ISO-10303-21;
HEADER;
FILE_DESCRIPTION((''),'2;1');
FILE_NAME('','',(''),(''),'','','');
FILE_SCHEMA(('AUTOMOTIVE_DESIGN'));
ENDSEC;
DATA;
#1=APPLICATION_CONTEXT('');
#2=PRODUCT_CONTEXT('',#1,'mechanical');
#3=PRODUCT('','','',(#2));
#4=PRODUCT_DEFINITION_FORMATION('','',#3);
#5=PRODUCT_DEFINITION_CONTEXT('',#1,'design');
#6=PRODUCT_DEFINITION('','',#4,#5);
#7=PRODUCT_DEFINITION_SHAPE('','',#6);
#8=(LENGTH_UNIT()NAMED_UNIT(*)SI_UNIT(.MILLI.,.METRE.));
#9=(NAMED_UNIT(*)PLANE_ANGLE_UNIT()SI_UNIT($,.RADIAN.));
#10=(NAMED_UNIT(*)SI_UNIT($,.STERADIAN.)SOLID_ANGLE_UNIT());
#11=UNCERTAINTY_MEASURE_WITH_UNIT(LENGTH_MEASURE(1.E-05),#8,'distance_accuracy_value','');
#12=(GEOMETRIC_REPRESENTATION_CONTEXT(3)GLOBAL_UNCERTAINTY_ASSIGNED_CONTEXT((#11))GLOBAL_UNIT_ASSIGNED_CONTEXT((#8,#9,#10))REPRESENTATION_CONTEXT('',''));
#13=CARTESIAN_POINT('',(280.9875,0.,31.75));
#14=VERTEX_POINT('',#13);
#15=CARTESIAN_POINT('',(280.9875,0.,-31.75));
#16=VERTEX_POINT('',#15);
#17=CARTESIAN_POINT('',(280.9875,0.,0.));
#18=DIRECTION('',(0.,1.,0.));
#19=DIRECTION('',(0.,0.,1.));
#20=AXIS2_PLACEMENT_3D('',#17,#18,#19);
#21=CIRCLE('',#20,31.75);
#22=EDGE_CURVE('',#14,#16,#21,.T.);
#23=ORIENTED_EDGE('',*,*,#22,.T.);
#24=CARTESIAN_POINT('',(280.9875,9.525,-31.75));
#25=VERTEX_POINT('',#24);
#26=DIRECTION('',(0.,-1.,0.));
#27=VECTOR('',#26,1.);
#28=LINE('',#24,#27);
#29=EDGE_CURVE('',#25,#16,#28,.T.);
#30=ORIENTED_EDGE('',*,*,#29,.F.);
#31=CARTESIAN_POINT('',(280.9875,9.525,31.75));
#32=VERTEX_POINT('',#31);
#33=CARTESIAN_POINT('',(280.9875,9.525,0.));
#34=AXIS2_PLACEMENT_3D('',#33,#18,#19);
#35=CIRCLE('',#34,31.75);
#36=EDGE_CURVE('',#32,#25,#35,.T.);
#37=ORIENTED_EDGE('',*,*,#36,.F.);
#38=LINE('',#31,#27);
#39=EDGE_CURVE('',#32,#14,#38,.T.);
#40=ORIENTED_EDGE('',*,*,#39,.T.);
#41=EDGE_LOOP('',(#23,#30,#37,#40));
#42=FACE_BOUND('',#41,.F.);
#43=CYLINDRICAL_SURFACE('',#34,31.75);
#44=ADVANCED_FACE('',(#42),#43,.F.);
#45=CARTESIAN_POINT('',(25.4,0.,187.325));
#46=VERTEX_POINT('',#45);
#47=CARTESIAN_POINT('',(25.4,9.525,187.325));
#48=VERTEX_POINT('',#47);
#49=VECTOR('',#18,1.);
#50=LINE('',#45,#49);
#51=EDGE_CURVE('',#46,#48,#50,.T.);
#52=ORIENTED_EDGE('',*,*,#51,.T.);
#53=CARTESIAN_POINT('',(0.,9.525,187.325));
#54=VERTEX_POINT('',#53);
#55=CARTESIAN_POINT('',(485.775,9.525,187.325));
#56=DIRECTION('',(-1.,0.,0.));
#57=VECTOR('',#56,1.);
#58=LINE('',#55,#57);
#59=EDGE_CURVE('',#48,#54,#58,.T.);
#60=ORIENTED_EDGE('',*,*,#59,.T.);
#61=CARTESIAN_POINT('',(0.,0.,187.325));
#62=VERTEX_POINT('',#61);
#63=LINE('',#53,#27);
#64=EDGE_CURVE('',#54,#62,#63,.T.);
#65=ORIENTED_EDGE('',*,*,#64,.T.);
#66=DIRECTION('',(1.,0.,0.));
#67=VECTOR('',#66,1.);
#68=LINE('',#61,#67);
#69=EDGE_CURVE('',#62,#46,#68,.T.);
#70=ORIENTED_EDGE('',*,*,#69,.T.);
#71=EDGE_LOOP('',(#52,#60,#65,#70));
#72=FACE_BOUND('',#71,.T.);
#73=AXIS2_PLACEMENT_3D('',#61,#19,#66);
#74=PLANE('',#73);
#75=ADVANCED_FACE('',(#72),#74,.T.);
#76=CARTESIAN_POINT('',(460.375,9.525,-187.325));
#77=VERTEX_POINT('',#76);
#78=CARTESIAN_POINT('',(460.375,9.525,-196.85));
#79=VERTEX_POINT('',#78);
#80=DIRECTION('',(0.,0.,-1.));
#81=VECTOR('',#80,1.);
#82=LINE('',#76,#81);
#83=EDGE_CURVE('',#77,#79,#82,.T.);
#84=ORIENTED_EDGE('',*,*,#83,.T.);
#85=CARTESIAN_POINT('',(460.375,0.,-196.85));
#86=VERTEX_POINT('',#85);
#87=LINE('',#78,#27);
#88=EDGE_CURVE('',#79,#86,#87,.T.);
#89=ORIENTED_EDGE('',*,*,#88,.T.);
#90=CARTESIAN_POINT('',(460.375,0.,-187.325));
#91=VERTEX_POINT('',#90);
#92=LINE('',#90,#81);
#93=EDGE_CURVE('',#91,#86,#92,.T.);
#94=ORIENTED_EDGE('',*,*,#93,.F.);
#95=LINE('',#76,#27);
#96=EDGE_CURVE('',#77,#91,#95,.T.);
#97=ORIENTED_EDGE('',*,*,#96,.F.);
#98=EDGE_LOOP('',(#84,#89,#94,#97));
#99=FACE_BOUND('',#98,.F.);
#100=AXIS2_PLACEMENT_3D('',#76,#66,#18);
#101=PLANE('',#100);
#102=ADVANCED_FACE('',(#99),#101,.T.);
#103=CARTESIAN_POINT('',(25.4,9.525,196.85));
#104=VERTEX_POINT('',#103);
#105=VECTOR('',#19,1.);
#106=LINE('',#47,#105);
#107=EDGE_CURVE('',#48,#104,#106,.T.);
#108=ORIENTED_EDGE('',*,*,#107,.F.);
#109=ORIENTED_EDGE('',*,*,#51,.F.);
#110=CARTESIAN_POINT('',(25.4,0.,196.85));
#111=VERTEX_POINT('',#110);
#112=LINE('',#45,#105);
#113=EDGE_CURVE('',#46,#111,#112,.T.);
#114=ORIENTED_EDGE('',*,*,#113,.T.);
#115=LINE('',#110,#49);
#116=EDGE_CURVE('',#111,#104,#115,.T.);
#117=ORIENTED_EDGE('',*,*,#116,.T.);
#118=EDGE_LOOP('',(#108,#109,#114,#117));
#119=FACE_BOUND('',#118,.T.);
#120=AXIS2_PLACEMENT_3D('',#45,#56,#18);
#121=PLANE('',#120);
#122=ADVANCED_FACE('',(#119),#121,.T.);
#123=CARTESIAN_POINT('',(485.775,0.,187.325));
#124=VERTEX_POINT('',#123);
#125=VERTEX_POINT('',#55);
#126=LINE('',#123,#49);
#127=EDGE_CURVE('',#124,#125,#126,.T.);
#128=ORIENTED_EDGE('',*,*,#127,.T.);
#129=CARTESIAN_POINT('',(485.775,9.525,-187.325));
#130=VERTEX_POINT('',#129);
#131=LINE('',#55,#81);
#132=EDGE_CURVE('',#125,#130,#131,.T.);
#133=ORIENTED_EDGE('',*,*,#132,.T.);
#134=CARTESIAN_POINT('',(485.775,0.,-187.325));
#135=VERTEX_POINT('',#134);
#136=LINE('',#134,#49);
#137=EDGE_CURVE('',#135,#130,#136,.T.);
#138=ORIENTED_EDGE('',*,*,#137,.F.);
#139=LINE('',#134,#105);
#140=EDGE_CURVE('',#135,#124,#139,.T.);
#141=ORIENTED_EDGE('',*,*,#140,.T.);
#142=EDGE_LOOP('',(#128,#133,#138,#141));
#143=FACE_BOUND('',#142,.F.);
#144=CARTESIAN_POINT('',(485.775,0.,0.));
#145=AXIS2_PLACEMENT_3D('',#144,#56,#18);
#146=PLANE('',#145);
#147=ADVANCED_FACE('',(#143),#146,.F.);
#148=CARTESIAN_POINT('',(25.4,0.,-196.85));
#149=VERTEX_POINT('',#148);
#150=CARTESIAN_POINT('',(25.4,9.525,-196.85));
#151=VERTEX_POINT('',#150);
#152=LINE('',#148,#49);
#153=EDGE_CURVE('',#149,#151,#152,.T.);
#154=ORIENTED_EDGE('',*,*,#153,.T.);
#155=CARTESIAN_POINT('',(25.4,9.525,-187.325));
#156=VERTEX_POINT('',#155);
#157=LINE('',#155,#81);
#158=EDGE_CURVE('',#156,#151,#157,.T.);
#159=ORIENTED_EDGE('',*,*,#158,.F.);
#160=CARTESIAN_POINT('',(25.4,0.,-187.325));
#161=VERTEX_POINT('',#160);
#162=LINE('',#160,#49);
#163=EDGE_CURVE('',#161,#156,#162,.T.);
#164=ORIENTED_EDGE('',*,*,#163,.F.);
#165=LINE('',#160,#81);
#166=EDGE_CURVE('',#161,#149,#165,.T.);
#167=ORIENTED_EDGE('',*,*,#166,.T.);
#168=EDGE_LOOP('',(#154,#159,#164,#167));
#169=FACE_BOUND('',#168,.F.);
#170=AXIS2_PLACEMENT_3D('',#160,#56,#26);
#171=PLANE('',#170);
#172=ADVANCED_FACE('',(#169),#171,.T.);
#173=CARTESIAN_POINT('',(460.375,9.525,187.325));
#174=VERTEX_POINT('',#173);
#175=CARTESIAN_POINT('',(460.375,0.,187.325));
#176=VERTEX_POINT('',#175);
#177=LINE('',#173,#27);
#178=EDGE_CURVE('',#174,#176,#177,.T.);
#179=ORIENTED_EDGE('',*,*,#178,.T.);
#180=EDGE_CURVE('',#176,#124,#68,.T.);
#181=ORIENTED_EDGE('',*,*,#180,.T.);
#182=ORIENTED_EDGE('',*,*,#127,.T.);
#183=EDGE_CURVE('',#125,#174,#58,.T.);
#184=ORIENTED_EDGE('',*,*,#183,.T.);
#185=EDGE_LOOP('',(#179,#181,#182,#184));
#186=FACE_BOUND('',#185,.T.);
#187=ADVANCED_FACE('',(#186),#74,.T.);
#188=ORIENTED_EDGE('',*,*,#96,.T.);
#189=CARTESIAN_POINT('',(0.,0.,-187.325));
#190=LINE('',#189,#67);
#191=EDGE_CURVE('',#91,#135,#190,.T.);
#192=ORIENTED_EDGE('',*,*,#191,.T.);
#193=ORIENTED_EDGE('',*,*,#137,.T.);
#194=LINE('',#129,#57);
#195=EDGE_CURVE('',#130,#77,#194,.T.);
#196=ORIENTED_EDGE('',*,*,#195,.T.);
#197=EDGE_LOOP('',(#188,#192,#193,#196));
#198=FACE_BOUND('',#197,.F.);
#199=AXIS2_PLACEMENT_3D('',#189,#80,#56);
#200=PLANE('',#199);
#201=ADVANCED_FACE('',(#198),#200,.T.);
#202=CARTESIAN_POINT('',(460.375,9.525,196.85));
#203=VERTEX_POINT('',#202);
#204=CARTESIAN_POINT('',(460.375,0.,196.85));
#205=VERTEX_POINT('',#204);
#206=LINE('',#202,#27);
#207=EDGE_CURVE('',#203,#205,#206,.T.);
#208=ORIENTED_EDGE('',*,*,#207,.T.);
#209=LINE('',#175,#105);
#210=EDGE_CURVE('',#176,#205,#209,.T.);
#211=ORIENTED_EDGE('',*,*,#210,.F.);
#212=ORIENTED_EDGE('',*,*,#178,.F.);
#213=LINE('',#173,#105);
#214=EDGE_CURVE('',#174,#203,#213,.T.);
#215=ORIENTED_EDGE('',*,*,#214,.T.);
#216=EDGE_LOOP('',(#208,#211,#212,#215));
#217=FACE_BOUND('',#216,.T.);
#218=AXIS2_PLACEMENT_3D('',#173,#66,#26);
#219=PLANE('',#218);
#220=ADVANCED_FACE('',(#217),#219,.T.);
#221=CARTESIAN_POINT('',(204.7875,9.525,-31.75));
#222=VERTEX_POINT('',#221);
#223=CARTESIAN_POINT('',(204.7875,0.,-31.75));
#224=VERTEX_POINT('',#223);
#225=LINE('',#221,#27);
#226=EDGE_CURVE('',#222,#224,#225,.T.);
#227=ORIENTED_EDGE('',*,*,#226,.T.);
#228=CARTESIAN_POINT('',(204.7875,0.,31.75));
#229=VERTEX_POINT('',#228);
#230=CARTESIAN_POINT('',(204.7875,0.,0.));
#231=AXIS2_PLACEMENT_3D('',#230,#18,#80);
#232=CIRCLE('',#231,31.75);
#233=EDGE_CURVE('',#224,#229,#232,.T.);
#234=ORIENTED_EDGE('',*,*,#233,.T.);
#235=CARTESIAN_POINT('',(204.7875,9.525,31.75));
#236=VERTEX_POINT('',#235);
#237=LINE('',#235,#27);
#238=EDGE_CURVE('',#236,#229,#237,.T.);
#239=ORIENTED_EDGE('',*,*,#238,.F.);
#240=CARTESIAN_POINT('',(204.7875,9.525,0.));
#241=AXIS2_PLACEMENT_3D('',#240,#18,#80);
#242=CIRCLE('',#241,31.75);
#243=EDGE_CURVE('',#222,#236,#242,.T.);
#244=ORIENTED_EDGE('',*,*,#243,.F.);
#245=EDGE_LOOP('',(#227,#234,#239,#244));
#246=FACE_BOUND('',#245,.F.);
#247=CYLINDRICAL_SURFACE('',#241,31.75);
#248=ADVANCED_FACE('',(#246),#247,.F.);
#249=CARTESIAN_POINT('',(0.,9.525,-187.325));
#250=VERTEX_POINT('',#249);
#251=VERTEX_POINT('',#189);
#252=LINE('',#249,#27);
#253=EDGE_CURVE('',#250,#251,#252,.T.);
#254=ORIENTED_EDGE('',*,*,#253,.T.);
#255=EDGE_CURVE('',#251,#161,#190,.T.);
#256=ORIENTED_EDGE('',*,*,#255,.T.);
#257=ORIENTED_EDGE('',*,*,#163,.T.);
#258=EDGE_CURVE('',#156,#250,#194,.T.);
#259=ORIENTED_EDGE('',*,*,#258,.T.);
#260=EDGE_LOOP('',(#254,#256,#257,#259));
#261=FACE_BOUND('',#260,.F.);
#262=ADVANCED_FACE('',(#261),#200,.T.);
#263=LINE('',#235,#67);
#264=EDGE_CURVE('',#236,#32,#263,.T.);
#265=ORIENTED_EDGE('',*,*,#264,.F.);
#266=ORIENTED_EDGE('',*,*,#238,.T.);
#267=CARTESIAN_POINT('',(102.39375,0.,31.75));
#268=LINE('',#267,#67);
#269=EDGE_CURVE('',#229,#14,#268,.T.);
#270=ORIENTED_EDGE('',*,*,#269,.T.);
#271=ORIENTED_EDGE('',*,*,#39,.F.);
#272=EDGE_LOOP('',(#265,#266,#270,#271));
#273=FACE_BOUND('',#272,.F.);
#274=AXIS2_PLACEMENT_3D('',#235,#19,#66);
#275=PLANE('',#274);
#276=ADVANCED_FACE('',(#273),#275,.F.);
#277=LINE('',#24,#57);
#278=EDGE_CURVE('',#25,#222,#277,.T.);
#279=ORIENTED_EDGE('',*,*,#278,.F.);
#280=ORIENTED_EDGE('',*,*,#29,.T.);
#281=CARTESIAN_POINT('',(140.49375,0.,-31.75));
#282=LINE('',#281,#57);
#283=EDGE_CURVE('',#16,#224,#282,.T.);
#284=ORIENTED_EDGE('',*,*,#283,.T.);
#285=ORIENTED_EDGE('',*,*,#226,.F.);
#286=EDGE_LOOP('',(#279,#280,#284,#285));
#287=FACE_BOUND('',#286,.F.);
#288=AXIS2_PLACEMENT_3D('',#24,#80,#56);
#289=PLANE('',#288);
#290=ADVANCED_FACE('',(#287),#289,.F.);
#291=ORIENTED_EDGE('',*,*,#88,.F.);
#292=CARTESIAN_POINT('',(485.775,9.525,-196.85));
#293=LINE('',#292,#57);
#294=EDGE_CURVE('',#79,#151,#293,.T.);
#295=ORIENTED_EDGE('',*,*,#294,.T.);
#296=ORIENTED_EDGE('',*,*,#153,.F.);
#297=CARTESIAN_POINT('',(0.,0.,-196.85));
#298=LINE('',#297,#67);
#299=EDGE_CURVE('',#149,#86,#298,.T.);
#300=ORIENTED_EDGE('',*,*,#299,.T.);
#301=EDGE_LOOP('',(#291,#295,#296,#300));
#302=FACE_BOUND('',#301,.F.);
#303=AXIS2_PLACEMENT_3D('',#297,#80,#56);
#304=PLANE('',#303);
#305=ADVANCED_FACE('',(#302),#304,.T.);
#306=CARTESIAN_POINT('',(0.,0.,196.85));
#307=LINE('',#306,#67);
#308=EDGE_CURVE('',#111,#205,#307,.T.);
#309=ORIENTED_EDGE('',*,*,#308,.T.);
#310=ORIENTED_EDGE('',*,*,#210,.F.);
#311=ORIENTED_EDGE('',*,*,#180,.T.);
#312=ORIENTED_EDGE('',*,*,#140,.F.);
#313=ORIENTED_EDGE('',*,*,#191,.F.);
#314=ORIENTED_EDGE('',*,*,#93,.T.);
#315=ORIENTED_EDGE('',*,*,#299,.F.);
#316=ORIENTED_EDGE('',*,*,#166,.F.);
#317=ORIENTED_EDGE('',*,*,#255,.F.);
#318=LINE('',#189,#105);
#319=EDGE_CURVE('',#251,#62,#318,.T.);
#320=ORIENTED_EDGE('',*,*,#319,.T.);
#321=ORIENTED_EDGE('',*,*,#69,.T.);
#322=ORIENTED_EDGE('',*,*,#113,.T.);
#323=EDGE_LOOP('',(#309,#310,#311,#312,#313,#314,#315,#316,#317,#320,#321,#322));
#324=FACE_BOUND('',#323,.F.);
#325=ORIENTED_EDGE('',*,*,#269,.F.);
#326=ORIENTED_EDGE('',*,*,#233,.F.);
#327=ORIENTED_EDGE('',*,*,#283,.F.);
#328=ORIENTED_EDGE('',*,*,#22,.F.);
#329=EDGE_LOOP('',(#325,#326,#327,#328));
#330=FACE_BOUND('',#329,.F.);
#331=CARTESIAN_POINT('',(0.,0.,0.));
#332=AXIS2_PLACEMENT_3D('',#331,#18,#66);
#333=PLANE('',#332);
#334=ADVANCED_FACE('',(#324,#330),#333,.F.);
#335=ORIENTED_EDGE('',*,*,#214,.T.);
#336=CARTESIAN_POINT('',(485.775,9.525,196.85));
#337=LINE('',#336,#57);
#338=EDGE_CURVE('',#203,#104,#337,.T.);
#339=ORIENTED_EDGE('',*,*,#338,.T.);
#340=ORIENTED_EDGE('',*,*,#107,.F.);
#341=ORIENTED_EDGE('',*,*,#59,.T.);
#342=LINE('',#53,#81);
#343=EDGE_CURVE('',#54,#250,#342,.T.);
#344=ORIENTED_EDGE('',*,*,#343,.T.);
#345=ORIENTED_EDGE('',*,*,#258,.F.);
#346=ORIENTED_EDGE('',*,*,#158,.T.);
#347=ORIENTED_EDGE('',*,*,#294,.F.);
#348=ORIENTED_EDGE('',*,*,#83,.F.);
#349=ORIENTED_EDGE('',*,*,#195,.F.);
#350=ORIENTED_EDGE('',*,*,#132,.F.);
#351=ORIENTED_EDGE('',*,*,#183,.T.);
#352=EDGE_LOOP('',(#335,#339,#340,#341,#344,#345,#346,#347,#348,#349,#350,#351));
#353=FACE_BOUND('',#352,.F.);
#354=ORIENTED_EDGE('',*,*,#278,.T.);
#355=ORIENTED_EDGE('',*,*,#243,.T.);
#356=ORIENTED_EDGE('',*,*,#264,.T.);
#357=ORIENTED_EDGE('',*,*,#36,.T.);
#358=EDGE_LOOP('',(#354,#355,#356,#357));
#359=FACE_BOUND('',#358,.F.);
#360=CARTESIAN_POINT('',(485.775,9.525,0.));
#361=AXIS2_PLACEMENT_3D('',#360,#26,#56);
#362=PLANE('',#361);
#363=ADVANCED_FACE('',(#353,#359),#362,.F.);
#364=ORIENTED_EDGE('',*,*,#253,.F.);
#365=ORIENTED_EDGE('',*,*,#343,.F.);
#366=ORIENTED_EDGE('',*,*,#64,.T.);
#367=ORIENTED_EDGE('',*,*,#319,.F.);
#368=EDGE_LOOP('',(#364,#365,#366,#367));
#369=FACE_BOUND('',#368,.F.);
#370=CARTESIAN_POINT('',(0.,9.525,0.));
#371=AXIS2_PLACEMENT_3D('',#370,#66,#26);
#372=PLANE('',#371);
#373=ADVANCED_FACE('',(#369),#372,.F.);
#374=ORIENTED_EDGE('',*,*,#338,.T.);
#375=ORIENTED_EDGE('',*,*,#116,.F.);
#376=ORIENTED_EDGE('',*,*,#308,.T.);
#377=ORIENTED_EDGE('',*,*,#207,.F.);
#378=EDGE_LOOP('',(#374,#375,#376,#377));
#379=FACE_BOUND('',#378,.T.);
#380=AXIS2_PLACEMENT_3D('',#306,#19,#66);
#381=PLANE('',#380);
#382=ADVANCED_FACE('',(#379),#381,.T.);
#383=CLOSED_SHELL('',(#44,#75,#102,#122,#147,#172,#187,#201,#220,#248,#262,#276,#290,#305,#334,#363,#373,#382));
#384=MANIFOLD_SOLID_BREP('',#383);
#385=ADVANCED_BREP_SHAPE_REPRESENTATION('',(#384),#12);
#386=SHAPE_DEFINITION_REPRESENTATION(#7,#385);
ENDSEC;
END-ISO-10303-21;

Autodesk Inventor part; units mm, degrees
ref_plane "YZ Plane" through (0, 0, 0) normal (1, 0, 0) x (0, 1, 0)
ref_plane "XZ Plane" through (0, 0, 0) normal (0, 1, 0) x (-1, 0, 0)
ref_plane "XY Plane" through (0, 0, 0) normal (0, 0, 1) x (1, 0, 0)
sketch "Sketch1" plane through (0, 0, 0) normal (0, 0, 1) x (1, 0, 0)
  line L0 (0, 0) -> (485.775, 0)
  line L1 (485.775, 0) -> (485.775, 9.525)
  line L2 (485.775, 9.525) -> (0, 9.525)
  line L3 (0, 9.525) -> (0, 0)
  dimension "d0" = 485.775
  dimension "d1" = 9.525
extrude "Extrusion1" add sketch "Sketch1" along normal blind 187.325
sketch "Sketch2" plane through (0, 0, 187.325) normal (0, 0, 1) x (1, 0, 0)
  line L0 (0, 0) -> (485.775, 0) projected
  line L1 (485.775, 0) -> (485.775, 9.525) projected
  line L2 (485.775, 9.525) -> (0, 9.525) projected
  line L3 (0, 9.525) -> (0, 0) projected
  line L4 (25.4, 9.525) -> (460.375, 9.525)
  line L5 (460.375, 9.525) -> (460.375, 0)
  line L6 (460.375, 0) -> (25.4, 0)
  line L7 (25.4, 0) -> (25.4, 9.525)
  dimension "d4" = 25.4
  dimension "d5" = 25.4
extrude "Extrusion2" add sketch "Sketch2" along normal blind 9.525 contours L7 L2 L5 L0
mirror "Mirror1" about plane through (242.8875, 4.7625, 0) normal (0, 0, -1)
sketch "Sketch3" plane through (25.4, 9.525, 196.85) normal (0, 1, 0) x (1, 0, 0)
  line L0 (-25.4, 384.175) -> (-25.4, 9.525) projected
  line L1 (0, 9.525) -> (-25.4, 9.525) projected
  line L2 (460.375, 384.175) -> (460.375, 9.525) projected
  line L3 (434.975, 393.7) -> (0, 393.7) projected
  line L4 (179.3875, 196.85) -> (255.5875, 196.85) construction
  line L5 (179.3875, 165.1) -> (255.5875, 165.1)
  line L6 (255.5875, 228.6) -> (179.3875, 228.6)
  arc A0 (179.3875, 228.6) -> (179.3875, 165.1) centre (179.3875, 196.85) ccw
  arc A1 (255.5875, 165.1) -> (255.5875, 228.6) centre (255.5875, 196.85) ccw
  point P0 (-25.4, 196.85)
  point P1 (217.4875, 196.85)
  dimension "d8" = 76.2
  dimension "d9" = 31.75
  dimension "d10" = 196.85
  dimension "d11" = 242.8875
  dimension "d12" = 242.8875
extrude "Extrusion3" cut sketch "Sketch3" against normal through all
equation "\"d11\" = d12"
properties part number "top_cover_sheet" material "Wood (Birch)"
